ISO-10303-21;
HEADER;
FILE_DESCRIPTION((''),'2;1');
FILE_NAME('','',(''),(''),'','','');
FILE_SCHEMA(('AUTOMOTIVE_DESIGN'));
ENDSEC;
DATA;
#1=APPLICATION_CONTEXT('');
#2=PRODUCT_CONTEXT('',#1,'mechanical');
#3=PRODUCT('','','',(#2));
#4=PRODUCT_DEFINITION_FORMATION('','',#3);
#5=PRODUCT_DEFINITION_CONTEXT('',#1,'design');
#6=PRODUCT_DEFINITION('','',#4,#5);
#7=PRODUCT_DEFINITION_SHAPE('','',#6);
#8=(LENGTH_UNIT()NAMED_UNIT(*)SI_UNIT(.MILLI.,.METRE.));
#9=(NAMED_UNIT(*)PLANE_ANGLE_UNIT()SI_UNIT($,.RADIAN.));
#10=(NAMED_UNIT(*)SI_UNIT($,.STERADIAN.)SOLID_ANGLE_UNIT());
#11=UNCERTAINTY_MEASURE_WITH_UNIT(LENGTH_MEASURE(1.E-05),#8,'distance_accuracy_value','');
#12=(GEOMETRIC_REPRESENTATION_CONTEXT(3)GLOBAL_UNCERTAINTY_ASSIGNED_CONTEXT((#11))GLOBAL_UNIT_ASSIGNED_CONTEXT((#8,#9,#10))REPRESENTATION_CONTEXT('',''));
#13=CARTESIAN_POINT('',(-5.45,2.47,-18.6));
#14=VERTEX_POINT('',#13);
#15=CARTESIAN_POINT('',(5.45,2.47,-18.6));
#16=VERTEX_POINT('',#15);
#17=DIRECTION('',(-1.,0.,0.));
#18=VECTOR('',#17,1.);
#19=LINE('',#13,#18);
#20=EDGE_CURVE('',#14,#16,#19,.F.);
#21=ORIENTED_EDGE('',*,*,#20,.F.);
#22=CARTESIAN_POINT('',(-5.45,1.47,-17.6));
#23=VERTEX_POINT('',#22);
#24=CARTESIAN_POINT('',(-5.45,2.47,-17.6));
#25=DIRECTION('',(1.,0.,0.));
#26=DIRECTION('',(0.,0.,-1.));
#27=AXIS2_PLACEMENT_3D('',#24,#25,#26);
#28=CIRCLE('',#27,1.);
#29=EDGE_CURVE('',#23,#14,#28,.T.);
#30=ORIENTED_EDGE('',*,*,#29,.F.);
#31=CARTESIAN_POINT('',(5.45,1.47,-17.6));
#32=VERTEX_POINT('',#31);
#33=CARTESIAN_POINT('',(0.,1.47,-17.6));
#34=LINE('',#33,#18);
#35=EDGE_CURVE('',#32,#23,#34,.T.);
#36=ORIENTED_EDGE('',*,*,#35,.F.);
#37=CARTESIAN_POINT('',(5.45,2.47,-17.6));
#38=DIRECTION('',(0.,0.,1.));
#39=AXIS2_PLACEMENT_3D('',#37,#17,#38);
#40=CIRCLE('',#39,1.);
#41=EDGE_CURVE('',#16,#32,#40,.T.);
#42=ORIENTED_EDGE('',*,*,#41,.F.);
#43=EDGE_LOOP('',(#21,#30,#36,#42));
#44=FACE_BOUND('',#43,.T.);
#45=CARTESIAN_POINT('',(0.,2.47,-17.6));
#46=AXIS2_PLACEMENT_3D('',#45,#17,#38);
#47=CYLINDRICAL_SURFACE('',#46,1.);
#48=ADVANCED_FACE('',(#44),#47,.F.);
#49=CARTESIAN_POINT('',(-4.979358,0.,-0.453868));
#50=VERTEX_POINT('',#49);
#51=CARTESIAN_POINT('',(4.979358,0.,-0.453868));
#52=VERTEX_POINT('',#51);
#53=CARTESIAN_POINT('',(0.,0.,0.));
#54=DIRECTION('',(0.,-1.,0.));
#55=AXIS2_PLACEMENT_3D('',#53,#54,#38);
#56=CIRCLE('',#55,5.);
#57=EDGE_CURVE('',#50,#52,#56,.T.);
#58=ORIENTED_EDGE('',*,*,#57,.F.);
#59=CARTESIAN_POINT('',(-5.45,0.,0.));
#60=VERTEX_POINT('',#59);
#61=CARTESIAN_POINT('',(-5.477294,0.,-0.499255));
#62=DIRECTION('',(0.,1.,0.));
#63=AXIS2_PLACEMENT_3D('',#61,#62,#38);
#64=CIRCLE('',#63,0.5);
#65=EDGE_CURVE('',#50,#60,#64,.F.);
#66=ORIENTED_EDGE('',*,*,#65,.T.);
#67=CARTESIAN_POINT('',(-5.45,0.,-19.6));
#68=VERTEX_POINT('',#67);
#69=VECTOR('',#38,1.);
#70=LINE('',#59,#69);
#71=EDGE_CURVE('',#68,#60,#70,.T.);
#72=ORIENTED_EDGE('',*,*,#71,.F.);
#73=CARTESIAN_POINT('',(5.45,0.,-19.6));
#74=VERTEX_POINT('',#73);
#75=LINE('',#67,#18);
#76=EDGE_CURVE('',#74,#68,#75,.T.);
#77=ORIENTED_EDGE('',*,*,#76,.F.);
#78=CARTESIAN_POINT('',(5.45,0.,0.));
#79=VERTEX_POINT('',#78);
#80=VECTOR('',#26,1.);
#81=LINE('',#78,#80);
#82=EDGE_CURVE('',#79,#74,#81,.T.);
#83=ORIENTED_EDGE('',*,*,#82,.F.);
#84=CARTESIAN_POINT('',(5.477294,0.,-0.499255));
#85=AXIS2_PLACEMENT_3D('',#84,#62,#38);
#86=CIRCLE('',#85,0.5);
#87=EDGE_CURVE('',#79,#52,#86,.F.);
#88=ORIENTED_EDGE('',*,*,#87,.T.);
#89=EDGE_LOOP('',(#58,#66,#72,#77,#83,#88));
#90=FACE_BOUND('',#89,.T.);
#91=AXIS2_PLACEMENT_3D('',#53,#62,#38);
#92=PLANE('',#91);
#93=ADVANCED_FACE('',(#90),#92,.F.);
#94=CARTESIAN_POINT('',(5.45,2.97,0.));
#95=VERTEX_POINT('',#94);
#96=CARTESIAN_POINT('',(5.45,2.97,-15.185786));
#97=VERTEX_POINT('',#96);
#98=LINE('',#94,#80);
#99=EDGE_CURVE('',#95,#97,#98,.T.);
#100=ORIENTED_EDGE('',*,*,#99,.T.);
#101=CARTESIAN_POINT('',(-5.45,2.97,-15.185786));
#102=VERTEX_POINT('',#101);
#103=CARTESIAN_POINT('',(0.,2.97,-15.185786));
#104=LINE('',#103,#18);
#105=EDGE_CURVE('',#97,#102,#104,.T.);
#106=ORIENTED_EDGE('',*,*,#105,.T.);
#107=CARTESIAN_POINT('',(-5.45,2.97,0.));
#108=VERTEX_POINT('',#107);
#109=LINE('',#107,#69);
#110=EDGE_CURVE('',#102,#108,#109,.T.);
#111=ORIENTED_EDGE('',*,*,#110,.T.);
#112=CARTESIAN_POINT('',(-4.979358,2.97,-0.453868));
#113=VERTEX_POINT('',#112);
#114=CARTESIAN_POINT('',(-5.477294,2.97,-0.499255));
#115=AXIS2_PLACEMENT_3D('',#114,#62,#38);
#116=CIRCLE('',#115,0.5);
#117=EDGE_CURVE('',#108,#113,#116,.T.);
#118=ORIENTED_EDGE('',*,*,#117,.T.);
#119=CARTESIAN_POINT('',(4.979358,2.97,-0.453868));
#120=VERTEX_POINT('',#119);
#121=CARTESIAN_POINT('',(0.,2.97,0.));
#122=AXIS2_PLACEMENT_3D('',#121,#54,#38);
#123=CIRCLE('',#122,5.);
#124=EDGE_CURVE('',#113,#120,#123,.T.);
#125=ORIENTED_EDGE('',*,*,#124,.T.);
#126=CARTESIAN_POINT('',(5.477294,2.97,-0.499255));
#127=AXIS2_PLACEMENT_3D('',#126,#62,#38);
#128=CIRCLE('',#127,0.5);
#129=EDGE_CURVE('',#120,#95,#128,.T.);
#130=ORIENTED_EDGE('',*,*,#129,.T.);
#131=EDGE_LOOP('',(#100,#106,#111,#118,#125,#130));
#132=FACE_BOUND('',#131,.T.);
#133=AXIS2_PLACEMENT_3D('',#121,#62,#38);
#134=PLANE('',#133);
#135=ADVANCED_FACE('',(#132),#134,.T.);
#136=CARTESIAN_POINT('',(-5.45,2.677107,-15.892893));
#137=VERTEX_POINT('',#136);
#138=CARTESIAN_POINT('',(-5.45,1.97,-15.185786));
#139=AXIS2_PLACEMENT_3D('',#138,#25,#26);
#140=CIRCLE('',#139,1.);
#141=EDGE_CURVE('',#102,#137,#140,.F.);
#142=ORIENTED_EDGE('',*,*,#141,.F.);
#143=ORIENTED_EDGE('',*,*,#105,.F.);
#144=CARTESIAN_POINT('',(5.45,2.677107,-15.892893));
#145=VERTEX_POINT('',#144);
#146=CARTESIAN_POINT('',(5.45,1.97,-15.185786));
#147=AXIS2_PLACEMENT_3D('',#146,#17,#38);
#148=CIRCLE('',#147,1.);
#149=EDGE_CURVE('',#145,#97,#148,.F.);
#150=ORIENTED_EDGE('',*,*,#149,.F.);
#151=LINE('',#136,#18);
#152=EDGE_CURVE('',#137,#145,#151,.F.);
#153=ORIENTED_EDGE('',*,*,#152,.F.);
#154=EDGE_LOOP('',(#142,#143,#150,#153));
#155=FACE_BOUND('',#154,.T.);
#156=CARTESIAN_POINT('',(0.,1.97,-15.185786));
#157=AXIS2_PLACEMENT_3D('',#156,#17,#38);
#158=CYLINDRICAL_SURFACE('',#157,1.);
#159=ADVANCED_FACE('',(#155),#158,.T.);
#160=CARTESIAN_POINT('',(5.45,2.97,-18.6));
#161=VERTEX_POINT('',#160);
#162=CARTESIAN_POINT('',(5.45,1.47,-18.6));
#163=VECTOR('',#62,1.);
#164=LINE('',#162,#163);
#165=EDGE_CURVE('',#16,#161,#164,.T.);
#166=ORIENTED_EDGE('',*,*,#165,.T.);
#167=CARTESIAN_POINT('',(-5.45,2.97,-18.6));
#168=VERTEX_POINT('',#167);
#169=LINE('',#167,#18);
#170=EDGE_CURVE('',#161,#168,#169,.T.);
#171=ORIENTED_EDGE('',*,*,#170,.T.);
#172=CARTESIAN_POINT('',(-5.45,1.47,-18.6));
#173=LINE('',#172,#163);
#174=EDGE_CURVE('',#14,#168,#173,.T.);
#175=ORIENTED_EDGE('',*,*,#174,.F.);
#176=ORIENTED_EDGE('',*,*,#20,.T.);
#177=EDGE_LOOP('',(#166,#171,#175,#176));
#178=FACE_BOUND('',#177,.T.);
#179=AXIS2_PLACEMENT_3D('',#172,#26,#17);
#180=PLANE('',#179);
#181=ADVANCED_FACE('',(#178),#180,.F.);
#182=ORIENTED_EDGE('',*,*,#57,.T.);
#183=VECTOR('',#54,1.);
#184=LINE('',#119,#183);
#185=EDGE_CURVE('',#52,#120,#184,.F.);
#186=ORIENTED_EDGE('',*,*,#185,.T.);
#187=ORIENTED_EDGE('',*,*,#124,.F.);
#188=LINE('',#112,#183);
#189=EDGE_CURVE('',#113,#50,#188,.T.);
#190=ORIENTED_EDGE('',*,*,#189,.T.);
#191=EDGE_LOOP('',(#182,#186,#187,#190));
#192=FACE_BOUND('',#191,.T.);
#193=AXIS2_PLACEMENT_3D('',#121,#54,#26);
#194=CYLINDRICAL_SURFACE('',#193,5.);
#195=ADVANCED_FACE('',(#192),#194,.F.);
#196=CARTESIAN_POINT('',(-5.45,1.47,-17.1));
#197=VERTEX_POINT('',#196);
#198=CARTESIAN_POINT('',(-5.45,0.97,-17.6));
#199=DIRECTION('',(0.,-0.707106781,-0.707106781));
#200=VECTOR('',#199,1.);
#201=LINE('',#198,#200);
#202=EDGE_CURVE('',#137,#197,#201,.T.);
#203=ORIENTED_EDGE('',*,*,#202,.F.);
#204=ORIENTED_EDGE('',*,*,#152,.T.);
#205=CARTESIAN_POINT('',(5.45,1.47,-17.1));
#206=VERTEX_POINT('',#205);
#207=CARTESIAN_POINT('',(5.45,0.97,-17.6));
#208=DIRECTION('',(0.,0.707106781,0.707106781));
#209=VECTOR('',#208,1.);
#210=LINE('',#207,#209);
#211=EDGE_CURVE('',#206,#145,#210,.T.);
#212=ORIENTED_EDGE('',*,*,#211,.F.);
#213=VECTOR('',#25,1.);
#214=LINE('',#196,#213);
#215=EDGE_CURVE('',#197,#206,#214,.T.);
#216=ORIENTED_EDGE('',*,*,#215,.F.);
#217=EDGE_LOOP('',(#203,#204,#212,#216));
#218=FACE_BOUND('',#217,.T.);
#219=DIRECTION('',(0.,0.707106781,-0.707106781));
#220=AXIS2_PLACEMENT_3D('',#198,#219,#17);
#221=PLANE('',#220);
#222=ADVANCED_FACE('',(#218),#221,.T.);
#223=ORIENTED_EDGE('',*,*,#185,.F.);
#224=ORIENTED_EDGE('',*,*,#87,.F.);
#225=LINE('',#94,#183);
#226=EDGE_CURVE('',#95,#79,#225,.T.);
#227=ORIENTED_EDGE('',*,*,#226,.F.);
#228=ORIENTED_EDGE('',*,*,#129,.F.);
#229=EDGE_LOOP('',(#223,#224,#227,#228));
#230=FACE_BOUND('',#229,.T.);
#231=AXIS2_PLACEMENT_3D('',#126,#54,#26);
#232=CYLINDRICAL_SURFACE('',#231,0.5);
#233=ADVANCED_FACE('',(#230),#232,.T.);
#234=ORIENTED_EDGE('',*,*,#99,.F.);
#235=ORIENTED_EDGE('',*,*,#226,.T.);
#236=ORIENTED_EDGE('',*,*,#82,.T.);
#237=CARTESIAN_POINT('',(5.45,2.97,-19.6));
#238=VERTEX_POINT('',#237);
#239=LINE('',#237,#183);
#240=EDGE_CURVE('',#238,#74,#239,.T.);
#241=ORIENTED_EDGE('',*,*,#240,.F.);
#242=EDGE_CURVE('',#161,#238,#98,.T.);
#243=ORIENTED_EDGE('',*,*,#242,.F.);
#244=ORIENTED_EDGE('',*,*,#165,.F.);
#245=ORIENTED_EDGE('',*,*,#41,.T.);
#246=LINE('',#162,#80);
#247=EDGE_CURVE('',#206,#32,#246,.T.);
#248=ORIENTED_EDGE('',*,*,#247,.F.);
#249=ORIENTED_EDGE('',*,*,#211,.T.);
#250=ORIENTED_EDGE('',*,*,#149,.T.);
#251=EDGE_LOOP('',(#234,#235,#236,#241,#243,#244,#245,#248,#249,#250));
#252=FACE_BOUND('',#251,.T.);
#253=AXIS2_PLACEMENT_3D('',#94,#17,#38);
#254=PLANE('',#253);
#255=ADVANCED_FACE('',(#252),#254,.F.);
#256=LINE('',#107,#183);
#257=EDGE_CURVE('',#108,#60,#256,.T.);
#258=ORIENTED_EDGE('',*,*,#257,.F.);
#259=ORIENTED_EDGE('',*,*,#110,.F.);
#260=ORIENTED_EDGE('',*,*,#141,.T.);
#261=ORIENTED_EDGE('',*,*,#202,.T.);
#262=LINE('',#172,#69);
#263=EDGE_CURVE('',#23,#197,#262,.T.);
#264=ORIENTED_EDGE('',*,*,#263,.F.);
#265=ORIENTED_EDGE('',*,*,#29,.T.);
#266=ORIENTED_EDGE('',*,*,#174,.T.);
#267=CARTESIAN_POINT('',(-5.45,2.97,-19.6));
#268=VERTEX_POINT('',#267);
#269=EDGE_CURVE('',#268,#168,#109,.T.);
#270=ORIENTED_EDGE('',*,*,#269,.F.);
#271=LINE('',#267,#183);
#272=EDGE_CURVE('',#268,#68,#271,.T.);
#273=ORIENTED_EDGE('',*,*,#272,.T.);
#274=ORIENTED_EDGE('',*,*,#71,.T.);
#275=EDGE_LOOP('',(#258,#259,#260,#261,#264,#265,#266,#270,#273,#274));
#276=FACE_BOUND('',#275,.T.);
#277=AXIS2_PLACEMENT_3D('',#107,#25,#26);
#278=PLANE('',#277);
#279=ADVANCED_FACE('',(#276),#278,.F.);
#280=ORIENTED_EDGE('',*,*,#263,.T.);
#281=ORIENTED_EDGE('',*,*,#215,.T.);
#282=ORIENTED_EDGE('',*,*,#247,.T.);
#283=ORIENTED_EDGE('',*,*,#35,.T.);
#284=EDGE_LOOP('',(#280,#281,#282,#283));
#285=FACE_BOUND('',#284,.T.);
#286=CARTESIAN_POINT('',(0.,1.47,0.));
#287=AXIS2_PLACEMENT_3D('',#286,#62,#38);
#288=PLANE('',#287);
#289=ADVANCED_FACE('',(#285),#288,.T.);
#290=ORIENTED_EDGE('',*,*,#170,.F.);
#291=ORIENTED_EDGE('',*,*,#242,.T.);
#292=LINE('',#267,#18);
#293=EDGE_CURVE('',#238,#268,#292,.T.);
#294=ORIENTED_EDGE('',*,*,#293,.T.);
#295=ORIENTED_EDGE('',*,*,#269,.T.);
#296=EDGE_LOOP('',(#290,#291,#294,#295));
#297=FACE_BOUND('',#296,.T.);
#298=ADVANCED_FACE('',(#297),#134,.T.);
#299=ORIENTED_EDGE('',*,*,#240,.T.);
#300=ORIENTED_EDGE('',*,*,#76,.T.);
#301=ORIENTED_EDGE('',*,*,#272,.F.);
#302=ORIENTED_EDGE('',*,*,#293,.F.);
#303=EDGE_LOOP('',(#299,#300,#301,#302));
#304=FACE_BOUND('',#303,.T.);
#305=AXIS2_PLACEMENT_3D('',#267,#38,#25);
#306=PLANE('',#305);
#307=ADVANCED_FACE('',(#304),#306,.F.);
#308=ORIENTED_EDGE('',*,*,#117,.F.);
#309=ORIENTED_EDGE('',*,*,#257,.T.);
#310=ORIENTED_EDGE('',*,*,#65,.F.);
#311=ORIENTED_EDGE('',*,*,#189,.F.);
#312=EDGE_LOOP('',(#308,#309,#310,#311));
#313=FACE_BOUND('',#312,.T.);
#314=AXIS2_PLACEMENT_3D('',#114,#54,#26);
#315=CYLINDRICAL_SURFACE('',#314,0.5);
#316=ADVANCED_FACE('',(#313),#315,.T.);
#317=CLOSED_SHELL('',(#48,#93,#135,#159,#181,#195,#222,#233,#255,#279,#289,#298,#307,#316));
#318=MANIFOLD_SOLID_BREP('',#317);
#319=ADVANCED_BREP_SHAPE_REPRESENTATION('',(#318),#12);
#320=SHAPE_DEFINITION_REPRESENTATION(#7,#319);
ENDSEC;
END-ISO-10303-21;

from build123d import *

# Parameters (mm, degrees)
BOSS_EXTRUDE1_DEPTH = 2.97
FILLET1_R           = 0.5
SKETCH2_W           = 10.9
SKETCH2_H           = 1
CUT_EXTRUDE1_DEPTH  = 1.5
CHAMFER1_SIZE       = 2
FILLET2_R           = 1


with BuildPart() as part:
    # Sketch1 → Boss-Extrude1 (new body)
    with BuildSketch(Plane(origin=(0, 0, 0), x_dir=(1, 0, 0), z_dir=(0, 1, 0))):
        with BuildLine():
            Line((5, 0), (5.45, 0))
            Line((5.45, 0), (5.45, 19.6))
            Line((5.45, 19.6), (-5.45, 19.6))
            Line((-5.45, 19.6), (-5.45, 0))
            Line((-5.45, 0), (-5, 0))
            ThreePointArc((-5, 0), (0, 5), (5, 0))
        make_face()
    extrude(amount=BOSS_EXTRUDE1_DEPTH)

    # Fillet1
    # the kernel refuses this fillet: 0.5 mm, written as the material it takes off along each edge
    with BuildSketch(Plane(origin=(5, -1.193063938, 0), x_dir=(1, 0, 0), z_dir=(0, 1, 0))) as fillet1_piece_1:
        with BuildLine():
            CenterArc((0.477225575, 0.5), FILLET1_R, 185.21590857, 84.78409143)
            ThreePointArc((-0.020704023, 0.454545455), (-0.005178688, 0.227508366), (0, 0))
            Line((0, 0), (0.477225575, 0))
        make_face()
    extrude(amount=5.356127875, mode=Mode.SUBTRACT)
    with BuildSketch(Plane(origin=(-5, -1.193063938, 0), x_dir=(-1, 0, 0), z_dir=(0, 1, 0))) as fillet1_piece_2:
        with BuildLine():
            CenterArc((0.477225575, -0.5), FILLET1_R, 90, 84.78409143)
            ThreePointArc((-0.020704023, -0.454545455), (-0.005178688, -0.227508366), (0, 0))
            Line((0, 0), (0.477225575, 0))
        make_face()
    extrude(amount=5.356127875, mode=Mode.SUBTRACT)

    # Sketch2 → Cut-Extrude1 (cut)
    with BuildSketch(Plane(origin=(0, 2.97, 0), x_dir=(1, 0, 0), z_dir=(0, 1, 0))):
        with Locations((0, 18.1)):
            Rectangle(SKETCH2_W, SKETCH2_H)
    extrude(amount=-CUT_EXTRUDE1_DEPTH, mode=Mode.SUBTRACT)

    # Chamfer1
    # the kernel refuses this chamfer: 2 mm, written as the material it takes off along each edge
    with BuildSketch(Plane(origin=(10.593365976, 2.97, -17.6), x_dir=(0, 0.02749587661058627, 0.9996219169112968), z_dir=(-1, 0, 0))) as chamfer1_piece_1_section:
        Polygon((CHAMFER1_SIZE * 0.999621916911, -CHAMFER1_SIZE * 0.0274958766106), (-CHAMFER1_SIZE * 0.0274958766106, -CHAMFER1_SIZE * 0.999621916911), (0, 0), align=None)
    chamfer1_piece_1 = extrude(amount=21.186731952, mode=Mode.PRIVATE)
    chamfer1_piece_1 = split(chamfer1_piece_1, bisect_by=Plane(origin=(0, 1.47, -16.89608178), z_dir=(0, 1, 0)), keep=Keep.TOP, mode=Mode.PRIVATE)
    add(chamfer1_piece_1, mode=Mode.SUBTRACT)

    # Fillet2
    fillet2_edges = [part.edges().sort_by_distance(p)[0] for p in [
        (0, 1.47, -18.6),
        (0, 2.97, -15.6),
    ]]
    fillet(fillet2_edges, radius=FILLET2_R)


solid = part.part
